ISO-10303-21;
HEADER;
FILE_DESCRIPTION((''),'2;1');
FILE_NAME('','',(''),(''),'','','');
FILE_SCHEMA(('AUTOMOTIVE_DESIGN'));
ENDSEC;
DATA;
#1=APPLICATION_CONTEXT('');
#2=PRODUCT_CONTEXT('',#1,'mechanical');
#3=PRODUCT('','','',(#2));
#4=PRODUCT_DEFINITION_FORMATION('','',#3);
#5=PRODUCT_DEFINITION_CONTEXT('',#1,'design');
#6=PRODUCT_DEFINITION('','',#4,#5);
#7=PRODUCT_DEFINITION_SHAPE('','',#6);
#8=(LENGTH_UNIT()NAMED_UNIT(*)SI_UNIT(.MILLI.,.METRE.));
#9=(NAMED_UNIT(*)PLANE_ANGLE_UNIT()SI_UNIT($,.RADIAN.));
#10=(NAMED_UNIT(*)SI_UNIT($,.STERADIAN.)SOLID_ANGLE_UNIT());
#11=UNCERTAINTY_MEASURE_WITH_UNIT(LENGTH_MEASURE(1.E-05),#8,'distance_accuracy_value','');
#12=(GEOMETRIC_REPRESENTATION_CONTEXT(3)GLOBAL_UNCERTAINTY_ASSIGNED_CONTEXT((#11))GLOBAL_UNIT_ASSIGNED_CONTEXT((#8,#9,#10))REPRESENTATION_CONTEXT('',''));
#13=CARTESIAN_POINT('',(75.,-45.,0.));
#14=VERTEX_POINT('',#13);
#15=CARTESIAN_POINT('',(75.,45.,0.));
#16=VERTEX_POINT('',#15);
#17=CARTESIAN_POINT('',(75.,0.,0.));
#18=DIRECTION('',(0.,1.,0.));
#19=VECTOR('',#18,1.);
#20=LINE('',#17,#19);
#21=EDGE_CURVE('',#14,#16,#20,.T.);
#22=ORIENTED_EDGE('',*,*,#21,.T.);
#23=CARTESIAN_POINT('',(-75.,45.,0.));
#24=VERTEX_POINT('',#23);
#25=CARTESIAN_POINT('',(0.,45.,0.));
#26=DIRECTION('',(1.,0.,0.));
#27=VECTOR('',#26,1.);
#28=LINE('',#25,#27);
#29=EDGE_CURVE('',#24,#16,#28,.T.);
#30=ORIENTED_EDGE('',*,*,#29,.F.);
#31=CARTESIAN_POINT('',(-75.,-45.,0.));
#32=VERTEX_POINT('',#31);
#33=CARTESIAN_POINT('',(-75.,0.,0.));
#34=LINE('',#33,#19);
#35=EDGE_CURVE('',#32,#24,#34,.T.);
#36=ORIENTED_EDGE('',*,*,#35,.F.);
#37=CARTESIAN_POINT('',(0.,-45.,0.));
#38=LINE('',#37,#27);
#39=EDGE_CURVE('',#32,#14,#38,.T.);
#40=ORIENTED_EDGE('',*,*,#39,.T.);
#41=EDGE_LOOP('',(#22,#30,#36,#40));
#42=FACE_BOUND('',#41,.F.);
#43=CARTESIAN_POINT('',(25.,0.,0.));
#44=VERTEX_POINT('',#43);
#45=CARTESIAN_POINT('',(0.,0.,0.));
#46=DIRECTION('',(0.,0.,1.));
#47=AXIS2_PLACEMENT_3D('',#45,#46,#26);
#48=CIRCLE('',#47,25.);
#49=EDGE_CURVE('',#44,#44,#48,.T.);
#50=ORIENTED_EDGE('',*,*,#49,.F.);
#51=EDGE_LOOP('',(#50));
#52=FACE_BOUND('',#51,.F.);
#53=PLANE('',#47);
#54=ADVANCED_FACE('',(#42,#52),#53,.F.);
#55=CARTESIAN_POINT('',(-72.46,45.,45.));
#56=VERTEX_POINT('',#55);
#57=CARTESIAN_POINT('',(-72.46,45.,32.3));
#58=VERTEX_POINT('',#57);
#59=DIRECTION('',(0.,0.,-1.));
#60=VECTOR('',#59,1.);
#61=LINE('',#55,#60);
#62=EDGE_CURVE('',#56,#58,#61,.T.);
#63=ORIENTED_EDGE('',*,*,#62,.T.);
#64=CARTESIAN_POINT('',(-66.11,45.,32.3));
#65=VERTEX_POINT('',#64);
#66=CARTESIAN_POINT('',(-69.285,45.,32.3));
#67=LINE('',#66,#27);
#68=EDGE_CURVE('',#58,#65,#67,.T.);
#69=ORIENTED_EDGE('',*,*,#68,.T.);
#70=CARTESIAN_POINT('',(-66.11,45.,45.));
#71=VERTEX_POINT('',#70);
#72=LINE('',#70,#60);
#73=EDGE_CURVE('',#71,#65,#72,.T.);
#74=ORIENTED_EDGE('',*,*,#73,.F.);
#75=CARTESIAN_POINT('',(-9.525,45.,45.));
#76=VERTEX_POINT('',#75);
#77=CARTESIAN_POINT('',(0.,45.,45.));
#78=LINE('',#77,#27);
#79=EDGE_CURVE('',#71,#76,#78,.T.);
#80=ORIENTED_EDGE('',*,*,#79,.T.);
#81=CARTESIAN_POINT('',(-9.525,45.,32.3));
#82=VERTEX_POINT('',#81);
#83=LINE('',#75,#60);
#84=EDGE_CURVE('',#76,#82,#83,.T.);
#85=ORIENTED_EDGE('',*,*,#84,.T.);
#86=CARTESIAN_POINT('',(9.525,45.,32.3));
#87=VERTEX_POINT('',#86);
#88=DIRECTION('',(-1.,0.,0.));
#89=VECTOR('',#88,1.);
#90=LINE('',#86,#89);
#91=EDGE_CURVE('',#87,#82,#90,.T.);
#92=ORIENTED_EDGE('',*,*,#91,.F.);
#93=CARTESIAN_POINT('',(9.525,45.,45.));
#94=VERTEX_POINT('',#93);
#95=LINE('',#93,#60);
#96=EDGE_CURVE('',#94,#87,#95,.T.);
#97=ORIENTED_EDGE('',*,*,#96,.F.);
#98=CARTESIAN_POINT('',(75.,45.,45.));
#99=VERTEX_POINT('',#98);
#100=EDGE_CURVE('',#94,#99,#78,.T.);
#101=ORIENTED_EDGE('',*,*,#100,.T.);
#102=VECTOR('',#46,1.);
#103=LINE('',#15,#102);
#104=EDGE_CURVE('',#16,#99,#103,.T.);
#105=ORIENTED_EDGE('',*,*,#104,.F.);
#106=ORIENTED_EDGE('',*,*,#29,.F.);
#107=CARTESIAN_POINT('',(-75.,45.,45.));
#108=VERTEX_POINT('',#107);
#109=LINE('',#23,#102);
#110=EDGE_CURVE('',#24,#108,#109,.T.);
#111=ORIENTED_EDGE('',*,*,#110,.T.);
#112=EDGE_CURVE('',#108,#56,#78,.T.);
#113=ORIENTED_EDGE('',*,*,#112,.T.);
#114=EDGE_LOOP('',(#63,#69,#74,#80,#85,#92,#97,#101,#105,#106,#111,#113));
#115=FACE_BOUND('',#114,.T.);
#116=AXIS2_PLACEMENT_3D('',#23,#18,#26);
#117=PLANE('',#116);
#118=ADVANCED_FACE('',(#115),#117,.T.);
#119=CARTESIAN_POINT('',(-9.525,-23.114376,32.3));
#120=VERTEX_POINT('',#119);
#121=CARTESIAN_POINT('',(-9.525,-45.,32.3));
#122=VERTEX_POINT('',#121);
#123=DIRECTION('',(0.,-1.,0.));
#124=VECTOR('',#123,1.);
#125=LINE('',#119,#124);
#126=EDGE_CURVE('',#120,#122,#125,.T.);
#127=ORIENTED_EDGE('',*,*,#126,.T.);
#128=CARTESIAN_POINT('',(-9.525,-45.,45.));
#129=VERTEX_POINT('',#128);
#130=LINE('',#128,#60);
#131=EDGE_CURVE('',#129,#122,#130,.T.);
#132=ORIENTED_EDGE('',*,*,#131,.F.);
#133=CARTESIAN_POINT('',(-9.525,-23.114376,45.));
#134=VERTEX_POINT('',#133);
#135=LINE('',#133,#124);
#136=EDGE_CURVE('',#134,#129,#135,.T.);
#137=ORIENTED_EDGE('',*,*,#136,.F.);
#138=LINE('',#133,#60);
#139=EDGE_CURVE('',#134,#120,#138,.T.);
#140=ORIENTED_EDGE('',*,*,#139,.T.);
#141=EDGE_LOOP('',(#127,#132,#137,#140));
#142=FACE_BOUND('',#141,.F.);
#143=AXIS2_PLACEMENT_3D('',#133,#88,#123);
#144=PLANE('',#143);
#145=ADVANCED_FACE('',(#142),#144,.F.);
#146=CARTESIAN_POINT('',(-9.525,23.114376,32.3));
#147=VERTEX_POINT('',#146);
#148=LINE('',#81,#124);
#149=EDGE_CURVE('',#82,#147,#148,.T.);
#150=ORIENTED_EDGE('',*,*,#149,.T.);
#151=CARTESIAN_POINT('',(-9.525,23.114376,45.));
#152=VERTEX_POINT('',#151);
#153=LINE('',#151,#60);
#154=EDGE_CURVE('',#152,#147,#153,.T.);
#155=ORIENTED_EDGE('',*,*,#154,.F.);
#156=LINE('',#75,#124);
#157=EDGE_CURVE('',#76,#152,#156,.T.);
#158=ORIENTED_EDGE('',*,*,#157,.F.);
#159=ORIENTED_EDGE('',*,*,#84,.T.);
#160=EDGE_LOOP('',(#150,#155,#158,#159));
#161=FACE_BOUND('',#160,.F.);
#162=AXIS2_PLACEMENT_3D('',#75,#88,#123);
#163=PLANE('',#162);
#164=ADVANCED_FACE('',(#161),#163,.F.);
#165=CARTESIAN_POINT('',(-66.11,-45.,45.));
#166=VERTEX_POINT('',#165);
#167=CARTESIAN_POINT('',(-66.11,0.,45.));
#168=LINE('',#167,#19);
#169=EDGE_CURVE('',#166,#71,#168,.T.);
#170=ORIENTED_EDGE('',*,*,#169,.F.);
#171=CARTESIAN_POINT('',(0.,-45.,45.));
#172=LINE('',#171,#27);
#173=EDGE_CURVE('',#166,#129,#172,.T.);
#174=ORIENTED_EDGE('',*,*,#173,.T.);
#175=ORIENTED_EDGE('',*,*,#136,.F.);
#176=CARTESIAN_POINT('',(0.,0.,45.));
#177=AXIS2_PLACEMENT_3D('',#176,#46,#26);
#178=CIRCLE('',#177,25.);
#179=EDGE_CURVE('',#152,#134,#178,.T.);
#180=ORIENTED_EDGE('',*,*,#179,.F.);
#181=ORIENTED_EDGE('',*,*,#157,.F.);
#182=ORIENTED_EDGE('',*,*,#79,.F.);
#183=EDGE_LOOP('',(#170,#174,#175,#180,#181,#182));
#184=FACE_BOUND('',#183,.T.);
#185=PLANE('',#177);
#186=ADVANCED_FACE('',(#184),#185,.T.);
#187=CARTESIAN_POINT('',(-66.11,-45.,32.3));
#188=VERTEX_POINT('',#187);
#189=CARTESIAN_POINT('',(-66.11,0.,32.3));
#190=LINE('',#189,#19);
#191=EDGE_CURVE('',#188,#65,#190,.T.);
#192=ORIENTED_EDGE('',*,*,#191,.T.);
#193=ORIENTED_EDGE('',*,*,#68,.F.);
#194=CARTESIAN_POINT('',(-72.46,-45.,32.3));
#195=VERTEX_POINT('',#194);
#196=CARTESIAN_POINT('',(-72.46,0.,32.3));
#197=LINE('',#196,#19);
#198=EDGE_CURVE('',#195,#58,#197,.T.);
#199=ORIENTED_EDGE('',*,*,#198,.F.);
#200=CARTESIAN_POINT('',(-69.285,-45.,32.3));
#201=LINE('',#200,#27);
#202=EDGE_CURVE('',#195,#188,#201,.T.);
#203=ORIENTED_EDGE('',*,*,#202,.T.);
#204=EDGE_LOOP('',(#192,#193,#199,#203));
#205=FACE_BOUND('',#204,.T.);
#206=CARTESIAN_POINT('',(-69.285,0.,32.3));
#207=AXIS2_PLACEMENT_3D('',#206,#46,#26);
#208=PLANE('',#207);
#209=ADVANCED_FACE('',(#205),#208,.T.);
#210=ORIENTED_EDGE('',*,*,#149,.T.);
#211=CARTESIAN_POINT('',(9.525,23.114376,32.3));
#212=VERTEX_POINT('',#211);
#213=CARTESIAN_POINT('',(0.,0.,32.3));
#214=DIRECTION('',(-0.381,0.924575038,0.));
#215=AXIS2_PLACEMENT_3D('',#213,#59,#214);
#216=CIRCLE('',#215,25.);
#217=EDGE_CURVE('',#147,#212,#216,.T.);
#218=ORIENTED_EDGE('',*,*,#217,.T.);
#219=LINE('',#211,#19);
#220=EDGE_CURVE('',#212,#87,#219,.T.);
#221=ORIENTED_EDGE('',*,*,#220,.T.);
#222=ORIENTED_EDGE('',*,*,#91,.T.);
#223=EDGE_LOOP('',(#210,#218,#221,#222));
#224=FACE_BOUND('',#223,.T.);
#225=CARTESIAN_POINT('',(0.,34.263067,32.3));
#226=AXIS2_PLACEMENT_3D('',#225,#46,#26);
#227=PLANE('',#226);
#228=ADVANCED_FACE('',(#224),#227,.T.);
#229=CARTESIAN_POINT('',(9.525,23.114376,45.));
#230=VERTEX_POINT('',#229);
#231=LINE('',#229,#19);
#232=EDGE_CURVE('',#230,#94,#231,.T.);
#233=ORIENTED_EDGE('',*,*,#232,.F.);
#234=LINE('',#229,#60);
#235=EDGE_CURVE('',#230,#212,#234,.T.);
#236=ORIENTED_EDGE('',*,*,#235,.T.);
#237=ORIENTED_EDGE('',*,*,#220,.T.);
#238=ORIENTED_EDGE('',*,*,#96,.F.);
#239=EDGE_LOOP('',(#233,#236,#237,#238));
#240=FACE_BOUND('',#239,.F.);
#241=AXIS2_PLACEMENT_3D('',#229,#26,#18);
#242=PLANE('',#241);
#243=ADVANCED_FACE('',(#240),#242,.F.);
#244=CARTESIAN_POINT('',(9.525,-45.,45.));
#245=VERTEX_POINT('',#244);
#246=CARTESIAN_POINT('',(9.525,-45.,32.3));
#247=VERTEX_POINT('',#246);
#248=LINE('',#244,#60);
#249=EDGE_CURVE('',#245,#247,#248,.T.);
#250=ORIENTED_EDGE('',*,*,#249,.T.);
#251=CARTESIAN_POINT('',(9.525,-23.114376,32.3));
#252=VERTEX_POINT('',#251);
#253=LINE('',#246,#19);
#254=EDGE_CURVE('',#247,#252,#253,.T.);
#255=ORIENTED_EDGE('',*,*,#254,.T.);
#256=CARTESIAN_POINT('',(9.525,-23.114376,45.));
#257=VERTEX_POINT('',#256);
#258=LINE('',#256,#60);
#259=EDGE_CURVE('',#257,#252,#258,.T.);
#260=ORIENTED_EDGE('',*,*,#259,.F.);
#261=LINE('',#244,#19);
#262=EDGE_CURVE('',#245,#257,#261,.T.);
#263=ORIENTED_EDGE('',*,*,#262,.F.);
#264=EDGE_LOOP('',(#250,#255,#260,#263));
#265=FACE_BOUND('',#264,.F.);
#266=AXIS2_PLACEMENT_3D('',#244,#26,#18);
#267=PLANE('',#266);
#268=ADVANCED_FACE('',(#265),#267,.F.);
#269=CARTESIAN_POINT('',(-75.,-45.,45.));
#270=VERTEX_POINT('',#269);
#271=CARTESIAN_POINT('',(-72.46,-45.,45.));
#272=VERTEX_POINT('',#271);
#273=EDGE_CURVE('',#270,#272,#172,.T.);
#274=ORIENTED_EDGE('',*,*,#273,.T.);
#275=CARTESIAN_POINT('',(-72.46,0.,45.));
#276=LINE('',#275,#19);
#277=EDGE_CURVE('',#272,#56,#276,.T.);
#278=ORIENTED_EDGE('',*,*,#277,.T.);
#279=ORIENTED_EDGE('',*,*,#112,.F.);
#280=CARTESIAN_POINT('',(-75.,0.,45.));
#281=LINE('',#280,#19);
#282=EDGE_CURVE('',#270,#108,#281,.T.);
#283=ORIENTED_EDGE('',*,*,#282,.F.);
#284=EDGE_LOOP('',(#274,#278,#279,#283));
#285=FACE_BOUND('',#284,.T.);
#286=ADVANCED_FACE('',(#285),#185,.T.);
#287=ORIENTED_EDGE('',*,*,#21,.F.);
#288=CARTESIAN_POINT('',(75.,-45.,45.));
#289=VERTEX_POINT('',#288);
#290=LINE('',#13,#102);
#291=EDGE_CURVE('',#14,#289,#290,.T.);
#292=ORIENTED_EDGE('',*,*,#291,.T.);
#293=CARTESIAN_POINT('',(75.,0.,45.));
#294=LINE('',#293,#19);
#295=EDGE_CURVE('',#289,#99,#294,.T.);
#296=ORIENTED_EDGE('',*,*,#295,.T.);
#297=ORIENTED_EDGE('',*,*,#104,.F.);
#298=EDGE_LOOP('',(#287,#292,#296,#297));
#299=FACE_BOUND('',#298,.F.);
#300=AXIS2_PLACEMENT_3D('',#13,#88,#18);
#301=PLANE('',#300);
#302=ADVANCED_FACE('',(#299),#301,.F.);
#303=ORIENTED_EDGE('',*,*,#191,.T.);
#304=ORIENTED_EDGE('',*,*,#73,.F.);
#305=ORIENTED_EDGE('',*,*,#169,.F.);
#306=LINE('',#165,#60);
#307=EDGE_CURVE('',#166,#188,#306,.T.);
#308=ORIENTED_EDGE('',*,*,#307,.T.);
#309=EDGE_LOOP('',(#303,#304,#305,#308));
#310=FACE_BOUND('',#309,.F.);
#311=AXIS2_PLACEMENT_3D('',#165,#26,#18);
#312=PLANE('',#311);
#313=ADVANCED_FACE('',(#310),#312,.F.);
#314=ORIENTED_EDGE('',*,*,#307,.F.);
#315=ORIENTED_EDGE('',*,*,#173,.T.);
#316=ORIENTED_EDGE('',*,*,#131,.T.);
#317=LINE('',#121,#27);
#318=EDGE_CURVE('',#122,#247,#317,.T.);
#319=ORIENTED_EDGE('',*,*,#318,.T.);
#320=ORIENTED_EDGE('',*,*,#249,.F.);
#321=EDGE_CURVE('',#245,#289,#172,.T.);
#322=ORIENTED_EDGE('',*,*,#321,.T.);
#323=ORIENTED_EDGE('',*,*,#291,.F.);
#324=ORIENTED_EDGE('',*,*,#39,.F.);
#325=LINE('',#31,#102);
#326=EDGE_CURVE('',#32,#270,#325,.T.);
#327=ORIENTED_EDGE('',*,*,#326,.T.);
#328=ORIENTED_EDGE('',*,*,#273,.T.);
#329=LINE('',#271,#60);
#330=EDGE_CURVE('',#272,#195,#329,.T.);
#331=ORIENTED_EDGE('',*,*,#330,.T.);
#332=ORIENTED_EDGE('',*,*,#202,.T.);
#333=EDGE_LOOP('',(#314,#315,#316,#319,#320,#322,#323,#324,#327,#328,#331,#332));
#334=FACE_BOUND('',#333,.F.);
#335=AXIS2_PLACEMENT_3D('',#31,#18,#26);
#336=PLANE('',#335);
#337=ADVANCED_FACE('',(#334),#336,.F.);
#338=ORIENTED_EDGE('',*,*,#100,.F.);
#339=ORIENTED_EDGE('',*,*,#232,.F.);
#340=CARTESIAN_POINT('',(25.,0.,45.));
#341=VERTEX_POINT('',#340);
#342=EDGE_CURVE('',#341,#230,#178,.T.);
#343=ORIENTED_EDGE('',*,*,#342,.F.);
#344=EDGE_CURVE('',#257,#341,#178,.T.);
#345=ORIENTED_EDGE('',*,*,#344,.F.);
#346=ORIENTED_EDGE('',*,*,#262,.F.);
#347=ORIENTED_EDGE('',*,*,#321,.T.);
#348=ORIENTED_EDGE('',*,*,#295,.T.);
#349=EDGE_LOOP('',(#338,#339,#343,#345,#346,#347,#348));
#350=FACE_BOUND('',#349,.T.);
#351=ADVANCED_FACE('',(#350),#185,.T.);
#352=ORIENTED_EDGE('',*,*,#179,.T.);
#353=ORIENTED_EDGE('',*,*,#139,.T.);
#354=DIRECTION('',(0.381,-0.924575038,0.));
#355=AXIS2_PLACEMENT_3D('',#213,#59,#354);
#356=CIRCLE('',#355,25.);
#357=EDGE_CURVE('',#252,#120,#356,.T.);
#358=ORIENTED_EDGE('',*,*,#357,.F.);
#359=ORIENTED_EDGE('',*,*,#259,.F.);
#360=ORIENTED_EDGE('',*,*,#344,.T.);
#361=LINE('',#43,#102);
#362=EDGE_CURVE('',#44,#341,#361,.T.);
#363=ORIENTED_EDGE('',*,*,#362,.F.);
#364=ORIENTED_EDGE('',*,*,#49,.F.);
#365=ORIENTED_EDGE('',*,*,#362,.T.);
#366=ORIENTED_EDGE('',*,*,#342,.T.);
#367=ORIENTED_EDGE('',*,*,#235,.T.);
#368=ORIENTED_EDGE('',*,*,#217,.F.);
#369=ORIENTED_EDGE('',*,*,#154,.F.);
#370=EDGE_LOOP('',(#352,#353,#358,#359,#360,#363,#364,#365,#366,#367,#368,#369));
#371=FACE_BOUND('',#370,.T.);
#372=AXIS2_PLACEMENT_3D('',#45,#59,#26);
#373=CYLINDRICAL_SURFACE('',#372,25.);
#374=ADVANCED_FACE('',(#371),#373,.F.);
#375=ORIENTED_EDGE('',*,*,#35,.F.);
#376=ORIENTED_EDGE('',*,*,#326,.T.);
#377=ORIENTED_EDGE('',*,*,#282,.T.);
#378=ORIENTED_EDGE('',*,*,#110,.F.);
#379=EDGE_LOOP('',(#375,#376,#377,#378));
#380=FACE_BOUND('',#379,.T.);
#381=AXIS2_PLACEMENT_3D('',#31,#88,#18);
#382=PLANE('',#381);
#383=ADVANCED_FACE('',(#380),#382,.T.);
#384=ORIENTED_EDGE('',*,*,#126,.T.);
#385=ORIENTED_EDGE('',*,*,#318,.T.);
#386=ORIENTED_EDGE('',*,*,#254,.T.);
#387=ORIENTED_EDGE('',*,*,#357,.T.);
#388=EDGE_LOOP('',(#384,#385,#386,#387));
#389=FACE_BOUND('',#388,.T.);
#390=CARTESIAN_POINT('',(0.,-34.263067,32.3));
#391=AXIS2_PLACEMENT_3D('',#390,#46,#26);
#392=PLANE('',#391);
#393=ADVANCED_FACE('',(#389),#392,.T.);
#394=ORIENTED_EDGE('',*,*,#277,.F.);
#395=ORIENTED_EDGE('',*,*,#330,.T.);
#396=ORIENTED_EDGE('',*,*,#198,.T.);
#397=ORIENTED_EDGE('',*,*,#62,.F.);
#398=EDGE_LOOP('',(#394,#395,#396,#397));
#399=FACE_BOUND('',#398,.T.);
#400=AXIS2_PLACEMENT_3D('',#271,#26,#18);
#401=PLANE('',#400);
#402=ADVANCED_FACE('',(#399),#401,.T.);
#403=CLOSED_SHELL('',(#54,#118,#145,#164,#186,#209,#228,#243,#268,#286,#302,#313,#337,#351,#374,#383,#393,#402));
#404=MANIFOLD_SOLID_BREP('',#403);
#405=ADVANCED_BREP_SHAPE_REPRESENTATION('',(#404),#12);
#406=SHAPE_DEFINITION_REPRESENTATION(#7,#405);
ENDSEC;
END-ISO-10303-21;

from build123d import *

# Parameters (mm, degrees)
F0_W     = 150
F0_H     = 90
F0_R     = 25
F1_DEPTH = 45
F2_W     = 6.35
F2_H     = 90
F3_DEPTH = 12.7


# Not quite as in the source:
# - a feature names something its author has since deleted; it is built from what else it names


with BuildPart() as f1:
    # F0 (on Top) → F1 (new body)
    with BuildSketch(Plane.XY):
        Rectangle(F0_W, F0_H)
        Circle(F0_R, mode=Mode.SUBTRACT)
    extrude(amount=F1_DEPTH)

    # F2 (on face) → F3 (cut)
    with BuildSketch(Plane.XY.offset(45)):
        with Locations((-69.285, 0)):
            Rectangle(F2_W, F2_H)
        with BuildLine():
            Line((-9.525, -23.1143759379), (-9.525, -45))
            Line((-9.525, -45), (9.525, -45))
            Line((9.525, -45), (9.525, -23.1143759379))
            ThreePointArc((9.525, -23.1143759379), (0, -25), (-9.525, -23.1143759379))
        make_face()
        with BuildLine():
            Line((9.525, 45), (-9.525, 45))
            Line((-9.525, 45), (-9.525, 23.1143759379))
            ThreePointArc((-9.525, 23.1143759379), (0, 25), (9.525, 23.1143759379))
            Line((9.525, 23.1143759379), (9.525, 45))
        make_face()
    extrude(amount=-F3_DEPTH, mode=Mode.SUBTRACT)


solid = f1.part
